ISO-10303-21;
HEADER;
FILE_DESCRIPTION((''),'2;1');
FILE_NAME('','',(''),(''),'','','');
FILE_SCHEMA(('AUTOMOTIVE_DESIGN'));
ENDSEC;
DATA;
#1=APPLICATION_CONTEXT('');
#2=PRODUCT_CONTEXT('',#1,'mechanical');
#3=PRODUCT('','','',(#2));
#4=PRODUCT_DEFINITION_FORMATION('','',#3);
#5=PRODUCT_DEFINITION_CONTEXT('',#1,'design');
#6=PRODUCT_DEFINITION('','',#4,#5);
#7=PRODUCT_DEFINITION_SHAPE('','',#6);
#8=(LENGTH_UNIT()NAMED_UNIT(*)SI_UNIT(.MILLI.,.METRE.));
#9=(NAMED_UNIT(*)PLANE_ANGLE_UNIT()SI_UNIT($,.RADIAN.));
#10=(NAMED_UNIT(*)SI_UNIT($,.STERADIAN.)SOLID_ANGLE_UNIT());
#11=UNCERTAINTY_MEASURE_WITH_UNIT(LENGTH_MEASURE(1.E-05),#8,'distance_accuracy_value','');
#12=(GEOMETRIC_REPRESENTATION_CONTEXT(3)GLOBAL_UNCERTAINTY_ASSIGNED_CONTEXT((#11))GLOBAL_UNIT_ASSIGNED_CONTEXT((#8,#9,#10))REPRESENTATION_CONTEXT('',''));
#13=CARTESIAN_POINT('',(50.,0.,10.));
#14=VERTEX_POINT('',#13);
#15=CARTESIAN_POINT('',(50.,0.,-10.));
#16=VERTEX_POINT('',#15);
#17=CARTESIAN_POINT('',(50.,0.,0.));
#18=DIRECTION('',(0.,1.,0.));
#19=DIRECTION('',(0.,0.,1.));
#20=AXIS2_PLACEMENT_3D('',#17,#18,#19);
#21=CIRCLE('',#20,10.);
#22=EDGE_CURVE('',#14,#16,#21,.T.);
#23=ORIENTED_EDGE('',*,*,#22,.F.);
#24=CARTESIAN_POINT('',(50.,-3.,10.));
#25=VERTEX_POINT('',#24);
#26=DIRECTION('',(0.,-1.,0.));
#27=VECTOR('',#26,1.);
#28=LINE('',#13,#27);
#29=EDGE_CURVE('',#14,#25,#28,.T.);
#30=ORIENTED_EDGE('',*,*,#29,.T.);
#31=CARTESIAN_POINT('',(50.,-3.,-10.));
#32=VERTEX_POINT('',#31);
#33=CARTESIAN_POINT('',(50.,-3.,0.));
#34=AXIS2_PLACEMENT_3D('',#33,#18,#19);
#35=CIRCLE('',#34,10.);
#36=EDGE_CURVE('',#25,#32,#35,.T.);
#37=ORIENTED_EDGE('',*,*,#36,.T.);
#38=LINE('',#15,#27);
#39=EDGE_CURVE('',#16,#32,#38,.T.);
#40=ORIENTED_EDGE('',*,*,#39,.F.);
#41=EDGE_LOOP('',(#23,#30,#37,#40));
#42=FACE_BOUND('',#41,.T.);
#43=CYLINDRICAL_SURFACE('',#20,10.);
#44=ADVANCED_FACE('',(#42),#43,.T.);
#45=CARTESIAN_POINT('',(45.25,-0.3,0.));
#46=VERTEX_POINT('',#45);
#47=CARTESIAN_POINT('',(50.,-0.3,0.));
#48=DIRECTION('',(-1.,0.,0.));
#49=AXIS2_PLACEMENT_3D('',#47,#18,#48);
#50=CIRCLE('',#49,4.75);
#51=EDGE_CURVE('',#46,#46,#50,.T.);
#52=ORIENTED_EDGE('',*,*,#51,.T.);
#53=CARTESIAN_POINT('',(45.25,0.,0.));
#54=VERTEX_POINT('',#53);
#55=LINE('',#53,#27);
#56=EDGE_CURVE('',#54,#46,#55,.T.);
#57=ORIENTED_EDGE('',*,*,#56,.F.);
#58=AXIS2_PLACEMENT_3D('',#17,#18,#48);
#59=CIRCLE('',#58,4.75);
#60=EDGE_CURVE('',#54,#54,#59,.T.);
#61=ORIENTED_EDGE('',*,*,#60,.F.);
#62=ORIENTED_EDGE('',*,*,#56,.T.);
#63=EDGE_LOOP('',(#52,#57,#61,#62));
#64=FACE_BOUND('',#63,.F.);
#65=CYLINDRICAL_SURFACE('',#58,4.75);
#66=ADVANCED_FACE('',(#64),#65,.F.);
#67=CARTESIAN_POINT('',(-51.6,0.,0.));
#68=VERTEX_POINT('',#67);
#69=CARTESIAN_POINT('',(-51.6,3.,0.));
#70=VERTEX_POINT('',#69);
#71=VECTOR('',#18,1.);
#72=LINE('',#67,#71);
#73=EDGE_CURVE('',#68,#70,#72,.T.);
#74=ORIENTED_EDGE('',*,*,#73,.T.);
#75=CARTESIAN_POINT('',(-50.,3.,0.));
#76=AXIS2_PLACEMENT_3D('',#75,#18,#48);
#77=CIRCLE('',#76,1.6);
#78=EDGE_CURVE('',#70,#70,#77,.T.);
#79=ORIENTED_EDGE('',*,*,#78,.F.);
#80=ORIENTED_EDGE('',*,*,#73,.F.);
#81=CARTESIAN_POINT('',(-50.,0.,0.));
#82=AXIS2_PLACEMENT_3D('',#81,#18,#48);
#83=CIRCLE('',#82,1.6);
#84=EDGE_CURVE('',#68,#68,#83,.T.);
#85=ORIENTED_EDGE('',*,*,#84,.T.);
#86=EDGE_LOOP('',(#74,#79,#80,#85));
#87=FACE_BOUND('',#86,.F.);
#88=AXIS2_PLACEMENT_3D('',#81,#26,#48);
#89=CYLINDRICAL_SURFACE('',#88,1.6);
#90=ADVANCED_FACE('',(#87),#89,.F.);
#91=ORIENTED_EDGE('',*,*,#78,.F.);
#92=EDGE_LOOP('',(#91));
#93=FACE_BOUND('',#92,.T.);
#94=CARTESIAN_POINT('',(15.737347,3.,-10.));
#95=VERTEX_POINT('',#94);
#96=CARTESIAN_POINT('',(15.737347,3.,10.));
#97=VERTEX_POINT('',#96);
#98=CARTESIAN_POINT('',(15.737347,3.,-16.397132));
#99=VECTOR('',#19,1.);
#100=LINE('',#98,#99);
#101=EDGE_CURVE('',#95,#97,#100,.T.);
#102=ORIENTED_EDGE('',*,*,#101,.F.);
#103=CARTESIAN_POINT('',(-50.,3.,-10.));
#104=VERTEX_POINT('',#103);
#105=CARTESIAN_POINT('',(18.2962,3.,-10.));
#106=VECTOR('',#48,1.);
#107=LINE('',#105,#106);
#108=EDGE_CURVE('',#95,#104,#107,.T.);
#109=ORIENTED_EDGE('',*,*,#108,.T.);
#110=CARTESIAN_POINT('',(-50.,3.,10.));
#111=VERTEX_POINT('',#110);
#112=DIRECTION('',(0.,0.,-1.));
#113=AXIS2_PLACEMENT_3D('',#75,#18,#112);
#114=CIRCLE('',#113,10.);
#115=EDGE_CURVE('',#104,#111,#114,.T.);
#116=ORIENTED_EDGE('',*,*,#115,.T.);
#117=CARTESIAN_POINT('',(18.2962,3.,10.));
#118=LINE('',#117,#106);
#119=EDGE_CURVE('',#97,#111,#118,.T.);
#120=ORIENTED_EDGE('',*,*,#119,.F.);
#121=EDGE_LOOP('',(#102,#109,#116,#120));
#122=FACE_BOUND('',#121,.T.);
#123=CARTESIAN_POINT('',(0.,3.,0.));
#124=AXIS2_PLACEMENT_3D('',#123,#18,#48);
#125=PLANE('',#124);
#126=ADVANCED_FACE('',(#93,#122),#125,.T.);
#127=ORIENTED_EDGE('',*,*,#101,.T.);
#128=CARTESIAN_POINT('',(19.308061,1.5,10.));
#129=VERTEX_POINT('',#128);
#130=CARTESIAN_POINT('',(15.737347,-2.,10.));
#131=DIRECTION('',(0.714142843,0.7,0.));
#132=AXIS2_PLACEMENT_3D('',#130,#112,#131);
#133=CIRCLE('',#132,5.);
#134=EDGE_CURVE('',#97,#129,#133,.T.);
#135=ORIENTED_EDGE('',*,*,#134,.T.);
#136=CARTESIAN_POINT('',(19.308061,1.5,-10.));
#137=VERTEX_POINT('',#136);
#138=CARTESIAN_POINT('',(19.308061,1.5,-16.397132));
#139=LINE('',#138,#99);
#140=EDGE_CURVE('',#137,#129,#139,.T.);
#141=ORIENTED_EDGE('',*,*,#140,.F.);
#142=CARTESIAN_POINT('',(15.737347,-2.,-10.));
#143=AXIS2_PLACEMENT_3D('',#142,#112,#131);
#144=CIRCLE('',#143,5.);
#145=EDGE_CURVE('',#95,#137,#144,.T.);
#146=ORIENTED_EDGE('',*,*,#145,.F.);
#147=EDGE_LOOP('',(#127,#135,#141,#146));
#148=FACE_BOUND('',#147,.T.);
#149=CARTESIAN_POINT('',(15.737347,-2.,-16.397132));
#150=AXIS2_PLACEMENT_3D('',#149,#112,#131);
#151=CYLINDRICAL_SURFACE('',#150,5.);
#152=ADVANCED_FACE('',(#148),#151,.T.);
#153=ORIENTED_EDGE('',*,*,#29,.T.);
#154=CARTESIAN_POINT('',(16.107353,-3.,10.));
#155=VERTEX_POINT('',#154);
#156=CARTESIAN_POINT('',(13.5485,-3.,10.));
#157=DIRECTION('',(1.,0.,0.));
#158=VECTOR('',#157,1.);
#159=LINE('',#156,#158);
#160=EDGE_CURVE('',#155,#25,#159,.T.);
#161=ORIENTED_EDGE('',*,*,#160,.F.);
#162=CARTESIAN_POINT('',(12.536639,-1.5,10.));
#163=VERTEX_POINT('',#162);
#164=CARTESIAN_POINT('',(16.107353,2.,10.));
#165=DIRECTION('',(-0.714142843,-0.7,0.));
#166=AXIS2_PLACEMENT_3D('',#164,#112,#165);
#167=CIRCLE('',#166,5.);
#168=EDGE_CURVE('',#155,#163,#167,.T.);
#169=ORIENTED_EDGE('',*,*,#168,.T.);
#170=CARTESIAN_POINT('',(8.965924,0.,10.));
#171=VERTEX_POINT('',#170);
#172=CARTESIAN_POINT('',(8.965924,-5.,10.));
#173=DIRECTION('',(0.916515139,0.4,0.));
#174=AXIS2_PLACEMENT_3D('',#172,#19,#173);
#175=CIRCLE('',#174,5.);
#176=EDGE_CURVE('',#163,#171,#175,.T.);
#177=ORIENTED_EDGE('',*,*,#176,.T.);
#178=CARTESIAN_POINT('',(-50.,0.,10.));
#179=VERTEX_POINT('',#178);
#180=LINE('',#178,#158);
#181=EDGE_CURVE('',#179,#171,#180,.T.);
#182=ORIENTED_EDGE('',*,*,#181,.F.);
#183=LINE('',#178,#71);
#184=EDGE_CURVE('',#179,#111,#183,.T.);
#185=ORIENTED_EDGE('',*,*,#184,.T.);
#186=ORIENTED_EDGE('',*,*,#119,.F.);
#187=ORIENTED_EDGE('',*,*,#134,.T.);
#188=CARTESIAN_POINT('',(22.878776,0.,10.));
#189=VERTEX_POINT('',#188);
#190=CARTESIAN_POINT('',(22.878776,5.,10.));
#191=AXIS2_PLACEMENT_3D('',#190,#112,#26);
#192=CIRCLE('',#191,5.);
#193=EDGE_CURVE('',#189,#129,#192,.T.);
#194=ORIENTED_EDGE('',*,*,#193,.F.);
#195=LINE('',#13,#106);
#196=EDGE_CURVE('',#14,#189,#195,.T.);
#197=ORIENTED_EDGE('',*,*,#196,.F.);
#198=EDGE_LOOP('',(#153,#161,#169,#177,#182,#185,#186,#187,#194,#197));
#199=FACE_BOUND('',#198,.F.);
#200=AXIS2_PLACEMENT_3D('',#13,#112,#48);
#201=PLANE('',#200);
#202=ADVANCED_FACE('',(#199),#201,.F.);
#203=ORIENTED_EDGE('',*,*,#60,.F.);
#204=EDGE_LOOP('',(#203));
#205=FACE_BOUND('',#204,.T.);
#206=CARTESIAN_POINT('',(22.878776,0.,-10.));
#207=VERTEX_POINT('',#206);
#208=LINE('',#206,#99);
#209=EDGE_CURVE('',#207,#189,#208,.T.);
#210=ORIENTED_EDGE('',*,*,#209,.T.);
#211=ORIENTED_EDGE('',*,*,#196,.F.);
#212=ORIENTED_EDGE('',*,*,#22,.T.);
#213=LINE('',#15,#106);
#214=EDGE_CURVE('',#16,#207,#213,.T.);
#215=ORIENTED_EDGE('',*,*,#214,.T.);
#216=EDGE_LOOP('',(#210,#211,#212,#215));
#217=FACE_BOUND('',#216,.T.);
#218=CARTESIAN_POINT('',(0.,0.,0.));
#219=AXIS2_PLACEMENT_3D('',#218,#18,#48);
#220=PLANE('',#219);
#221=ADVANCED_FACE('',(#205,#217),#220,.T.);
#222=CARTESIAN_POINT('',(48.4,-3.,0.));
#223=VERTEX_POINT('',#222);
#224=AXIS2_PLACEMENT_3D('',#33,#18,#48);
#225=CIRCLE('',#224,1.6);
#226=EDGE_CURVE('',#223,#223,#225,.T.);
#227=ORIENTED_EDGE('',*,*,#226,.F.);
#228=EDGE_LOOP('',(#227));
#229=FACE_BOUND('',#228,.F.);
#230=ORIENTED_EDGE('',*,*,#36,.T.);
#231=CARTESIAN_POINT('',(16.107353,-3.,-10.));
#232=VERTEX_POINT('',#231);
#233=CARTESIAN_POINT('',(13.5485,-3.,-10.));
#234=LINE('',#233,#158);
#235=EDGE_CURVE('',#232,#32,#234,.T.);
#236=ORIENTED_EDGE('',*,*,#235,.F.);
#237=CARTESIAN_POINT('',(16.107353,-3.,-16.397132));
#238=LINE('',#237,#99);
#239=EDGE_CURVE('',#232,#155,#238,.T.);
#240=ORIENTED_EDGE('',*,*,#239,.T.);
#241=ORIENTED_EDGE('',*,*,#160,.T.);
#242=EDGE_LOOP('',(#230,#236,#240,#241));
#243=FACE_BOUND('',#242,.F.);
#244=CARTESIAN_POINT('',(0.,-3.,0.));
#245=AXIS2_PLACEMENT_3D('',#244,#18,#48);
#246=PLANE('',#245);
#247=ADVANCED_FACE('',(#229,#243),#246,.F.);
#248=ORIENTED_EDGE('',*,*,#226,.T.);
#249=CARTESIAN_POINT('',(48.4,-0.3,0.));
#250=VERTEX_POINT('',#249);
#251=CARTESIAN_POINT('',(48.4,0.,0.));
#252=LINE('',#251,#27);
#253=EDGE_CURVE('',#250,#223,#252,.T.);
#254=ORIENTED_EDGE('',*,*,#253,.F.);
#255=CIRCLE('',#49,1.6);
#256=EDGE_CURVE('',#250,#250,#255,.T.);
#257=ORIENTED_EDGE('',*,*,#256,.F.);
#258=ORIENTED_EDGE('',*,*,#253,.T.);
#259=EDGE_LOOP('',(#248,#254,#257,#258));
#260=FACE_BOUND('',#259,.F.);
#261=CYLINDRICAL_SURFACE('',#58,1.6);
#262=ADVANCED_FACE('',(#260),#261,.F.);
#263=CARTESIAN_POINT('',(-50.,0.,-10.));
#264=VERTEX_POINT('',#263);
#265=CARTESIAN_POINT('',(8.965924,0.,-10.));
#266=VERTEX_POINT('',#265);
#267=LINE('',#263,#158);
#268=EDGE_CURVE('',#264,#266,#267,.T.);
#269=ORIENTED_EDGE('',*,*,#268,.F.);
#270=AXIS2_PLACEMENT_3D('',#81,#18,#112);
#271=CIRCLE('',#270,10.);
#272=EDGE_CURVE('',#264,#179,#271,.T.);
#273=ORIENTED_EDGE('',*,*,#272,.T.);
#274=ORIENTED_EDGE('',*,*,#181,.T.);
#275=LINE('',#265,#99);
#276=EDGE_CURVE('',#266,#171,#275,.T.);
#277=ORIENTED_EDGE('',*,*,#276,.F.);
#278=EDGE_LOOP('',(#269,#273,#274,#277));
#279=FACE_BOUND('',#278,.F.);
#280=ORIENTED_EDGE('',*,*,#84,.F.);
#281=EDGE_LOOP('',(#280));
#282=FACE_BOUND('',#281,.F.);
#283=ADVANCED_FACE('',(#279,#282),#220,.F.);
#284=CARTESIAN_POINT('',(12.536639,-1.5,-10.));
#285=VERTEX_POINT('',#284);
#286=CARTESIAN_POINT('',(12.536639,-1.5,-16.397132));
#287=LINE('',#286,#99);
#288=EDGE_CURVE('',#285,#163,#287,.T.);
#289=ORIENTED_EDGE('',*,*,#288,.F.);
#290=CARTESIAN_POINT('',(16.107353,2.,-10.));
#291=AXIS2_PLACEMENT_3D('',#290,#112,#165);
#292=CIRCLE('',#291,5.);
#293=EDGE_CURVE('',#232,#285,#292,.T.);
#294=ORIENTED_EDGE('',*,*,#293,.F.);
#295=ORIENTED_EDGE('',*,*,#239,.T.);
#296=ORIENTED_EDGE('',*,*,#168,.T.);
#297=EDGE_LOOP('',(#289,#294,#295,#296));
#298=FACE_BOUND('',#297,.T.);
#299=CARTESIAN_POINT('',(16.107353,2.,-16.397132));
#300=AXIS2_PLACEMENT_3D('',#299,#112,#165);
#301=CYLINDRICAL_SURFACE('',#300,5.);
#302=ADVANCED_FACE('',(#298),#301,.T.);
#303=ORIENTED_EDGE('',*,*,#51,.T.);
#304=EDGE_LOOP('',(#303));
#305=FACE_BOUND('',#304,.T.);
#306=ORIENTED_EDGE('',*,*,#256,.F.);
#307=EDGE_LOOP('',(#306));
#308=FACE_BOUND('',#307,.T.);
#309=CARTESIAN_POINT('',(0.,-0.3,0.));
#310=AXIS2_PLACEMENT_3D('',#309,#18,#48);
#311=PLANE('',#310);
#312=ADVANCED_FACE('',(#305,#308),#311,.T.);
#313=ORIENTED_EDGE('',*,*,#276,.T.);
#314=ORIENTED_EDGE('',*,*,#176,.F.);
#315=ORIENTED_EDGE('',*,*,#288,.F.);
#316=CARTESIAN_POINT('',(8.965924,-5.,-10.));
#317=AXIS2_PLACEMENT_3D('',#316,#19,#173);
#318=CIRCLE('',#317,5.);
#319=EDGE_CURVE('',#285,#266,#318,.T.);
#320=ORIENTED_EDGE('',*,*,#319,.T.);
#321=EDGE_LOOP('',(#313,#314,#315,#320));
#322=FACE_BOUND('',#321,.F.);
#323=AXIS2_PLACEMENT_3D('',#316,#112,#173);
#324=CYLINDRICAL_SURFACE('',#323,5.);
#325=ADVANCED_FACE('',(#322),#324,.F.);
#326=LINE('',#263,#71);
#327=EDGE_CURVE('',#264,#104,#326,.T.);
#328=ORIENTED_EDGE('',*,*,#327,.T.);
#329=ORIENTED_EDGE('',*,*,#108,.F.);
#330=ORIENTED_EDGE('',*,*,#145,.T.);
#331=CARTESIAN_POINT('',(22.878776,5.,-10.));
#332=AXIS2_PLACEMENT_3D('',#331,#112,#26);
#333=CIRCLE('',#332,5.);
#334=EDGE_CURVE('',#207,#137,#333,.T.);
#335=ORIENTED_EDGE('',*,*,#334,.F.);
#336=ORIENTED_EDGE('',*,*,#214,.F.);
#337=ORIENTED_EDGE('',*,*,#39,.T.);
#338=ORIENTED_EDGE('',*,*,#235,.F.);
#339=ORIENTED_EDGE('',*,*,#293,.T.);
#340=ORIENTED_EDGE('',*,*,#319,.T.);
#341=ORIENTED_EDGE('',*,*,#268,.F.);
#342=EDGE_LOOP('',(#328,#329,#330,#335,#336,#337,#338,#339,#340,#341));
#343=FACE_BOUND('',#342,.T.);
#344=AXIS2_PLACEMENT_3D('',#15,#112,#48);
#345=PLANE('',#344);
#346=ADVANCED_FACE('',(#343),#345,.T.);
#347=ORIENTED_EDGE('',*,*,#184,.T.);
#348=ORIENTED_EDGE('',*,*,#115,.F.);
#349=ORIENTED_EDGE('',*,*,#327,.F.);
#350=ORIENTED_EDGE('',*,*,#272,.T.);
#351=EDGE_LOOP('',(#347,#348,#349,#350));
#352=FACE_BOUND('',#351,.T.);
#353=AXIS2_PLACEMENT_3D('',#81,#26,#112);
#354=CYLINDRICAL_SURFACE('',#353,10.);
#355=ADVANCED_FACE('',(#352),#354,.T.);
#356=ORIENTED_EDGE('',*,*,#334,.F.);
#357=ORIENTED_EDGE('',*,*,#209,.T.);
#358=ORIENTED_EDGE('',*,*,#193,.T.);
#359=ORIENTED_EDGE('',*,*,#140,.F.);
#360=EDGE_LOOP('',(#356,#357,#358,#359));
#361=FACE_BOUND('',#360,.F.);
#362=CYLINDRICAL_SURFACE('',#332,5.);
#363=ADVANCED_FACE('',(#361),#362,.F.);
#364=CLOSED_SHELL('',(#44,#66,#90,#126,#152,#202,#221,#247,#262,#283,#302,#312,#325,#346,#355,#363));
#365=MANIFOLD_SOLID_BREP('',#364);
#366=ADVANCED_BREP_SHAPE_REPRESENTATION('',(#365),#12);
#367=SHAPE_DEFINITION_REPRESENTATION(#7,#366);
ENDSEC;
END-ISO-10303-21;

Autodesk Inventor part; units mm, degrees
ref_plane "YZ Plane" through (0, 0, 0) normal (1, 0, 0) x (0, 1, 0)
ref_plane "XZ Plane" through (0, 0, 0) normal (0, 1, 0) x (-1, 0, 0)
ref_plane "XY Plane" through (0, 0, 0) normal (0, 0, 1) x (1, 0, 0)
sketch "Sketch1" plane through (0, 0, 0) normal (0, 1, 0) x (-1, 0, 0)
  line L0 (-50, 10) -> (-18.2962, 10)
  line L1 (-50, -10) -> (-18.2962, -10)
  arc A0 (50, -10) -> (50, 10) centre (50, 0) ccw
  arc A1 (-50, 10) -> (-50, -10) centre (-50, 0) ccw
  circle A2 centre (50, 0) radius 1.6
  line L2 (0, 0) -> (0, -27.365) construction
  line L3 (0, 0) -> (19.8022, 0) construction
  circle A3 centre (50, 0) radius 4.75
  circle A4 centre (-50, 0) radius 1.6
  circle A5 centre (-50, 0) radius 4.75
  line L4 (-13.5485, -10) -> (-13.5485, 10)
  line L5 (-18.2962, -10) -> (-18.2962, 10)
  line L6 (-18.2962, 10) -> (-13.5485, 10)
  line L7 (-13.5485, 10) -> (50, 10)
  line L8 (-18.2962, -10) -> (-13.5485, -10)
  line L9 (-13.5485, -10) -> (50, -10)
  dimension "d1" = 100
  dimension "d2" = 10
  dimension "d3" = 3.2
  dimension "d4" = 9.5
extrude "Extrusion1" add sketch "Sketch1" against normal blind 3 contours L0 L5 L1 A1 | L6 L4 L8 L5 | A5
extrude "Extrusion2" cut sketch "Sketch1" against normal blind 0.3 contours A3 | A5
extrude "Extrusion3" add sketch "Sketch1" along normal blind 3 contours L6 L4 L8 L5 | L7 A0 L9 L4 | A3
fillet "Fillet1" radius 5 4 edges at (18.2962, 3, 0) (18.2962, 0, 0) (13.5485, 0, 0) (13.5485, -3, 0)
properties part number "ramie3"
